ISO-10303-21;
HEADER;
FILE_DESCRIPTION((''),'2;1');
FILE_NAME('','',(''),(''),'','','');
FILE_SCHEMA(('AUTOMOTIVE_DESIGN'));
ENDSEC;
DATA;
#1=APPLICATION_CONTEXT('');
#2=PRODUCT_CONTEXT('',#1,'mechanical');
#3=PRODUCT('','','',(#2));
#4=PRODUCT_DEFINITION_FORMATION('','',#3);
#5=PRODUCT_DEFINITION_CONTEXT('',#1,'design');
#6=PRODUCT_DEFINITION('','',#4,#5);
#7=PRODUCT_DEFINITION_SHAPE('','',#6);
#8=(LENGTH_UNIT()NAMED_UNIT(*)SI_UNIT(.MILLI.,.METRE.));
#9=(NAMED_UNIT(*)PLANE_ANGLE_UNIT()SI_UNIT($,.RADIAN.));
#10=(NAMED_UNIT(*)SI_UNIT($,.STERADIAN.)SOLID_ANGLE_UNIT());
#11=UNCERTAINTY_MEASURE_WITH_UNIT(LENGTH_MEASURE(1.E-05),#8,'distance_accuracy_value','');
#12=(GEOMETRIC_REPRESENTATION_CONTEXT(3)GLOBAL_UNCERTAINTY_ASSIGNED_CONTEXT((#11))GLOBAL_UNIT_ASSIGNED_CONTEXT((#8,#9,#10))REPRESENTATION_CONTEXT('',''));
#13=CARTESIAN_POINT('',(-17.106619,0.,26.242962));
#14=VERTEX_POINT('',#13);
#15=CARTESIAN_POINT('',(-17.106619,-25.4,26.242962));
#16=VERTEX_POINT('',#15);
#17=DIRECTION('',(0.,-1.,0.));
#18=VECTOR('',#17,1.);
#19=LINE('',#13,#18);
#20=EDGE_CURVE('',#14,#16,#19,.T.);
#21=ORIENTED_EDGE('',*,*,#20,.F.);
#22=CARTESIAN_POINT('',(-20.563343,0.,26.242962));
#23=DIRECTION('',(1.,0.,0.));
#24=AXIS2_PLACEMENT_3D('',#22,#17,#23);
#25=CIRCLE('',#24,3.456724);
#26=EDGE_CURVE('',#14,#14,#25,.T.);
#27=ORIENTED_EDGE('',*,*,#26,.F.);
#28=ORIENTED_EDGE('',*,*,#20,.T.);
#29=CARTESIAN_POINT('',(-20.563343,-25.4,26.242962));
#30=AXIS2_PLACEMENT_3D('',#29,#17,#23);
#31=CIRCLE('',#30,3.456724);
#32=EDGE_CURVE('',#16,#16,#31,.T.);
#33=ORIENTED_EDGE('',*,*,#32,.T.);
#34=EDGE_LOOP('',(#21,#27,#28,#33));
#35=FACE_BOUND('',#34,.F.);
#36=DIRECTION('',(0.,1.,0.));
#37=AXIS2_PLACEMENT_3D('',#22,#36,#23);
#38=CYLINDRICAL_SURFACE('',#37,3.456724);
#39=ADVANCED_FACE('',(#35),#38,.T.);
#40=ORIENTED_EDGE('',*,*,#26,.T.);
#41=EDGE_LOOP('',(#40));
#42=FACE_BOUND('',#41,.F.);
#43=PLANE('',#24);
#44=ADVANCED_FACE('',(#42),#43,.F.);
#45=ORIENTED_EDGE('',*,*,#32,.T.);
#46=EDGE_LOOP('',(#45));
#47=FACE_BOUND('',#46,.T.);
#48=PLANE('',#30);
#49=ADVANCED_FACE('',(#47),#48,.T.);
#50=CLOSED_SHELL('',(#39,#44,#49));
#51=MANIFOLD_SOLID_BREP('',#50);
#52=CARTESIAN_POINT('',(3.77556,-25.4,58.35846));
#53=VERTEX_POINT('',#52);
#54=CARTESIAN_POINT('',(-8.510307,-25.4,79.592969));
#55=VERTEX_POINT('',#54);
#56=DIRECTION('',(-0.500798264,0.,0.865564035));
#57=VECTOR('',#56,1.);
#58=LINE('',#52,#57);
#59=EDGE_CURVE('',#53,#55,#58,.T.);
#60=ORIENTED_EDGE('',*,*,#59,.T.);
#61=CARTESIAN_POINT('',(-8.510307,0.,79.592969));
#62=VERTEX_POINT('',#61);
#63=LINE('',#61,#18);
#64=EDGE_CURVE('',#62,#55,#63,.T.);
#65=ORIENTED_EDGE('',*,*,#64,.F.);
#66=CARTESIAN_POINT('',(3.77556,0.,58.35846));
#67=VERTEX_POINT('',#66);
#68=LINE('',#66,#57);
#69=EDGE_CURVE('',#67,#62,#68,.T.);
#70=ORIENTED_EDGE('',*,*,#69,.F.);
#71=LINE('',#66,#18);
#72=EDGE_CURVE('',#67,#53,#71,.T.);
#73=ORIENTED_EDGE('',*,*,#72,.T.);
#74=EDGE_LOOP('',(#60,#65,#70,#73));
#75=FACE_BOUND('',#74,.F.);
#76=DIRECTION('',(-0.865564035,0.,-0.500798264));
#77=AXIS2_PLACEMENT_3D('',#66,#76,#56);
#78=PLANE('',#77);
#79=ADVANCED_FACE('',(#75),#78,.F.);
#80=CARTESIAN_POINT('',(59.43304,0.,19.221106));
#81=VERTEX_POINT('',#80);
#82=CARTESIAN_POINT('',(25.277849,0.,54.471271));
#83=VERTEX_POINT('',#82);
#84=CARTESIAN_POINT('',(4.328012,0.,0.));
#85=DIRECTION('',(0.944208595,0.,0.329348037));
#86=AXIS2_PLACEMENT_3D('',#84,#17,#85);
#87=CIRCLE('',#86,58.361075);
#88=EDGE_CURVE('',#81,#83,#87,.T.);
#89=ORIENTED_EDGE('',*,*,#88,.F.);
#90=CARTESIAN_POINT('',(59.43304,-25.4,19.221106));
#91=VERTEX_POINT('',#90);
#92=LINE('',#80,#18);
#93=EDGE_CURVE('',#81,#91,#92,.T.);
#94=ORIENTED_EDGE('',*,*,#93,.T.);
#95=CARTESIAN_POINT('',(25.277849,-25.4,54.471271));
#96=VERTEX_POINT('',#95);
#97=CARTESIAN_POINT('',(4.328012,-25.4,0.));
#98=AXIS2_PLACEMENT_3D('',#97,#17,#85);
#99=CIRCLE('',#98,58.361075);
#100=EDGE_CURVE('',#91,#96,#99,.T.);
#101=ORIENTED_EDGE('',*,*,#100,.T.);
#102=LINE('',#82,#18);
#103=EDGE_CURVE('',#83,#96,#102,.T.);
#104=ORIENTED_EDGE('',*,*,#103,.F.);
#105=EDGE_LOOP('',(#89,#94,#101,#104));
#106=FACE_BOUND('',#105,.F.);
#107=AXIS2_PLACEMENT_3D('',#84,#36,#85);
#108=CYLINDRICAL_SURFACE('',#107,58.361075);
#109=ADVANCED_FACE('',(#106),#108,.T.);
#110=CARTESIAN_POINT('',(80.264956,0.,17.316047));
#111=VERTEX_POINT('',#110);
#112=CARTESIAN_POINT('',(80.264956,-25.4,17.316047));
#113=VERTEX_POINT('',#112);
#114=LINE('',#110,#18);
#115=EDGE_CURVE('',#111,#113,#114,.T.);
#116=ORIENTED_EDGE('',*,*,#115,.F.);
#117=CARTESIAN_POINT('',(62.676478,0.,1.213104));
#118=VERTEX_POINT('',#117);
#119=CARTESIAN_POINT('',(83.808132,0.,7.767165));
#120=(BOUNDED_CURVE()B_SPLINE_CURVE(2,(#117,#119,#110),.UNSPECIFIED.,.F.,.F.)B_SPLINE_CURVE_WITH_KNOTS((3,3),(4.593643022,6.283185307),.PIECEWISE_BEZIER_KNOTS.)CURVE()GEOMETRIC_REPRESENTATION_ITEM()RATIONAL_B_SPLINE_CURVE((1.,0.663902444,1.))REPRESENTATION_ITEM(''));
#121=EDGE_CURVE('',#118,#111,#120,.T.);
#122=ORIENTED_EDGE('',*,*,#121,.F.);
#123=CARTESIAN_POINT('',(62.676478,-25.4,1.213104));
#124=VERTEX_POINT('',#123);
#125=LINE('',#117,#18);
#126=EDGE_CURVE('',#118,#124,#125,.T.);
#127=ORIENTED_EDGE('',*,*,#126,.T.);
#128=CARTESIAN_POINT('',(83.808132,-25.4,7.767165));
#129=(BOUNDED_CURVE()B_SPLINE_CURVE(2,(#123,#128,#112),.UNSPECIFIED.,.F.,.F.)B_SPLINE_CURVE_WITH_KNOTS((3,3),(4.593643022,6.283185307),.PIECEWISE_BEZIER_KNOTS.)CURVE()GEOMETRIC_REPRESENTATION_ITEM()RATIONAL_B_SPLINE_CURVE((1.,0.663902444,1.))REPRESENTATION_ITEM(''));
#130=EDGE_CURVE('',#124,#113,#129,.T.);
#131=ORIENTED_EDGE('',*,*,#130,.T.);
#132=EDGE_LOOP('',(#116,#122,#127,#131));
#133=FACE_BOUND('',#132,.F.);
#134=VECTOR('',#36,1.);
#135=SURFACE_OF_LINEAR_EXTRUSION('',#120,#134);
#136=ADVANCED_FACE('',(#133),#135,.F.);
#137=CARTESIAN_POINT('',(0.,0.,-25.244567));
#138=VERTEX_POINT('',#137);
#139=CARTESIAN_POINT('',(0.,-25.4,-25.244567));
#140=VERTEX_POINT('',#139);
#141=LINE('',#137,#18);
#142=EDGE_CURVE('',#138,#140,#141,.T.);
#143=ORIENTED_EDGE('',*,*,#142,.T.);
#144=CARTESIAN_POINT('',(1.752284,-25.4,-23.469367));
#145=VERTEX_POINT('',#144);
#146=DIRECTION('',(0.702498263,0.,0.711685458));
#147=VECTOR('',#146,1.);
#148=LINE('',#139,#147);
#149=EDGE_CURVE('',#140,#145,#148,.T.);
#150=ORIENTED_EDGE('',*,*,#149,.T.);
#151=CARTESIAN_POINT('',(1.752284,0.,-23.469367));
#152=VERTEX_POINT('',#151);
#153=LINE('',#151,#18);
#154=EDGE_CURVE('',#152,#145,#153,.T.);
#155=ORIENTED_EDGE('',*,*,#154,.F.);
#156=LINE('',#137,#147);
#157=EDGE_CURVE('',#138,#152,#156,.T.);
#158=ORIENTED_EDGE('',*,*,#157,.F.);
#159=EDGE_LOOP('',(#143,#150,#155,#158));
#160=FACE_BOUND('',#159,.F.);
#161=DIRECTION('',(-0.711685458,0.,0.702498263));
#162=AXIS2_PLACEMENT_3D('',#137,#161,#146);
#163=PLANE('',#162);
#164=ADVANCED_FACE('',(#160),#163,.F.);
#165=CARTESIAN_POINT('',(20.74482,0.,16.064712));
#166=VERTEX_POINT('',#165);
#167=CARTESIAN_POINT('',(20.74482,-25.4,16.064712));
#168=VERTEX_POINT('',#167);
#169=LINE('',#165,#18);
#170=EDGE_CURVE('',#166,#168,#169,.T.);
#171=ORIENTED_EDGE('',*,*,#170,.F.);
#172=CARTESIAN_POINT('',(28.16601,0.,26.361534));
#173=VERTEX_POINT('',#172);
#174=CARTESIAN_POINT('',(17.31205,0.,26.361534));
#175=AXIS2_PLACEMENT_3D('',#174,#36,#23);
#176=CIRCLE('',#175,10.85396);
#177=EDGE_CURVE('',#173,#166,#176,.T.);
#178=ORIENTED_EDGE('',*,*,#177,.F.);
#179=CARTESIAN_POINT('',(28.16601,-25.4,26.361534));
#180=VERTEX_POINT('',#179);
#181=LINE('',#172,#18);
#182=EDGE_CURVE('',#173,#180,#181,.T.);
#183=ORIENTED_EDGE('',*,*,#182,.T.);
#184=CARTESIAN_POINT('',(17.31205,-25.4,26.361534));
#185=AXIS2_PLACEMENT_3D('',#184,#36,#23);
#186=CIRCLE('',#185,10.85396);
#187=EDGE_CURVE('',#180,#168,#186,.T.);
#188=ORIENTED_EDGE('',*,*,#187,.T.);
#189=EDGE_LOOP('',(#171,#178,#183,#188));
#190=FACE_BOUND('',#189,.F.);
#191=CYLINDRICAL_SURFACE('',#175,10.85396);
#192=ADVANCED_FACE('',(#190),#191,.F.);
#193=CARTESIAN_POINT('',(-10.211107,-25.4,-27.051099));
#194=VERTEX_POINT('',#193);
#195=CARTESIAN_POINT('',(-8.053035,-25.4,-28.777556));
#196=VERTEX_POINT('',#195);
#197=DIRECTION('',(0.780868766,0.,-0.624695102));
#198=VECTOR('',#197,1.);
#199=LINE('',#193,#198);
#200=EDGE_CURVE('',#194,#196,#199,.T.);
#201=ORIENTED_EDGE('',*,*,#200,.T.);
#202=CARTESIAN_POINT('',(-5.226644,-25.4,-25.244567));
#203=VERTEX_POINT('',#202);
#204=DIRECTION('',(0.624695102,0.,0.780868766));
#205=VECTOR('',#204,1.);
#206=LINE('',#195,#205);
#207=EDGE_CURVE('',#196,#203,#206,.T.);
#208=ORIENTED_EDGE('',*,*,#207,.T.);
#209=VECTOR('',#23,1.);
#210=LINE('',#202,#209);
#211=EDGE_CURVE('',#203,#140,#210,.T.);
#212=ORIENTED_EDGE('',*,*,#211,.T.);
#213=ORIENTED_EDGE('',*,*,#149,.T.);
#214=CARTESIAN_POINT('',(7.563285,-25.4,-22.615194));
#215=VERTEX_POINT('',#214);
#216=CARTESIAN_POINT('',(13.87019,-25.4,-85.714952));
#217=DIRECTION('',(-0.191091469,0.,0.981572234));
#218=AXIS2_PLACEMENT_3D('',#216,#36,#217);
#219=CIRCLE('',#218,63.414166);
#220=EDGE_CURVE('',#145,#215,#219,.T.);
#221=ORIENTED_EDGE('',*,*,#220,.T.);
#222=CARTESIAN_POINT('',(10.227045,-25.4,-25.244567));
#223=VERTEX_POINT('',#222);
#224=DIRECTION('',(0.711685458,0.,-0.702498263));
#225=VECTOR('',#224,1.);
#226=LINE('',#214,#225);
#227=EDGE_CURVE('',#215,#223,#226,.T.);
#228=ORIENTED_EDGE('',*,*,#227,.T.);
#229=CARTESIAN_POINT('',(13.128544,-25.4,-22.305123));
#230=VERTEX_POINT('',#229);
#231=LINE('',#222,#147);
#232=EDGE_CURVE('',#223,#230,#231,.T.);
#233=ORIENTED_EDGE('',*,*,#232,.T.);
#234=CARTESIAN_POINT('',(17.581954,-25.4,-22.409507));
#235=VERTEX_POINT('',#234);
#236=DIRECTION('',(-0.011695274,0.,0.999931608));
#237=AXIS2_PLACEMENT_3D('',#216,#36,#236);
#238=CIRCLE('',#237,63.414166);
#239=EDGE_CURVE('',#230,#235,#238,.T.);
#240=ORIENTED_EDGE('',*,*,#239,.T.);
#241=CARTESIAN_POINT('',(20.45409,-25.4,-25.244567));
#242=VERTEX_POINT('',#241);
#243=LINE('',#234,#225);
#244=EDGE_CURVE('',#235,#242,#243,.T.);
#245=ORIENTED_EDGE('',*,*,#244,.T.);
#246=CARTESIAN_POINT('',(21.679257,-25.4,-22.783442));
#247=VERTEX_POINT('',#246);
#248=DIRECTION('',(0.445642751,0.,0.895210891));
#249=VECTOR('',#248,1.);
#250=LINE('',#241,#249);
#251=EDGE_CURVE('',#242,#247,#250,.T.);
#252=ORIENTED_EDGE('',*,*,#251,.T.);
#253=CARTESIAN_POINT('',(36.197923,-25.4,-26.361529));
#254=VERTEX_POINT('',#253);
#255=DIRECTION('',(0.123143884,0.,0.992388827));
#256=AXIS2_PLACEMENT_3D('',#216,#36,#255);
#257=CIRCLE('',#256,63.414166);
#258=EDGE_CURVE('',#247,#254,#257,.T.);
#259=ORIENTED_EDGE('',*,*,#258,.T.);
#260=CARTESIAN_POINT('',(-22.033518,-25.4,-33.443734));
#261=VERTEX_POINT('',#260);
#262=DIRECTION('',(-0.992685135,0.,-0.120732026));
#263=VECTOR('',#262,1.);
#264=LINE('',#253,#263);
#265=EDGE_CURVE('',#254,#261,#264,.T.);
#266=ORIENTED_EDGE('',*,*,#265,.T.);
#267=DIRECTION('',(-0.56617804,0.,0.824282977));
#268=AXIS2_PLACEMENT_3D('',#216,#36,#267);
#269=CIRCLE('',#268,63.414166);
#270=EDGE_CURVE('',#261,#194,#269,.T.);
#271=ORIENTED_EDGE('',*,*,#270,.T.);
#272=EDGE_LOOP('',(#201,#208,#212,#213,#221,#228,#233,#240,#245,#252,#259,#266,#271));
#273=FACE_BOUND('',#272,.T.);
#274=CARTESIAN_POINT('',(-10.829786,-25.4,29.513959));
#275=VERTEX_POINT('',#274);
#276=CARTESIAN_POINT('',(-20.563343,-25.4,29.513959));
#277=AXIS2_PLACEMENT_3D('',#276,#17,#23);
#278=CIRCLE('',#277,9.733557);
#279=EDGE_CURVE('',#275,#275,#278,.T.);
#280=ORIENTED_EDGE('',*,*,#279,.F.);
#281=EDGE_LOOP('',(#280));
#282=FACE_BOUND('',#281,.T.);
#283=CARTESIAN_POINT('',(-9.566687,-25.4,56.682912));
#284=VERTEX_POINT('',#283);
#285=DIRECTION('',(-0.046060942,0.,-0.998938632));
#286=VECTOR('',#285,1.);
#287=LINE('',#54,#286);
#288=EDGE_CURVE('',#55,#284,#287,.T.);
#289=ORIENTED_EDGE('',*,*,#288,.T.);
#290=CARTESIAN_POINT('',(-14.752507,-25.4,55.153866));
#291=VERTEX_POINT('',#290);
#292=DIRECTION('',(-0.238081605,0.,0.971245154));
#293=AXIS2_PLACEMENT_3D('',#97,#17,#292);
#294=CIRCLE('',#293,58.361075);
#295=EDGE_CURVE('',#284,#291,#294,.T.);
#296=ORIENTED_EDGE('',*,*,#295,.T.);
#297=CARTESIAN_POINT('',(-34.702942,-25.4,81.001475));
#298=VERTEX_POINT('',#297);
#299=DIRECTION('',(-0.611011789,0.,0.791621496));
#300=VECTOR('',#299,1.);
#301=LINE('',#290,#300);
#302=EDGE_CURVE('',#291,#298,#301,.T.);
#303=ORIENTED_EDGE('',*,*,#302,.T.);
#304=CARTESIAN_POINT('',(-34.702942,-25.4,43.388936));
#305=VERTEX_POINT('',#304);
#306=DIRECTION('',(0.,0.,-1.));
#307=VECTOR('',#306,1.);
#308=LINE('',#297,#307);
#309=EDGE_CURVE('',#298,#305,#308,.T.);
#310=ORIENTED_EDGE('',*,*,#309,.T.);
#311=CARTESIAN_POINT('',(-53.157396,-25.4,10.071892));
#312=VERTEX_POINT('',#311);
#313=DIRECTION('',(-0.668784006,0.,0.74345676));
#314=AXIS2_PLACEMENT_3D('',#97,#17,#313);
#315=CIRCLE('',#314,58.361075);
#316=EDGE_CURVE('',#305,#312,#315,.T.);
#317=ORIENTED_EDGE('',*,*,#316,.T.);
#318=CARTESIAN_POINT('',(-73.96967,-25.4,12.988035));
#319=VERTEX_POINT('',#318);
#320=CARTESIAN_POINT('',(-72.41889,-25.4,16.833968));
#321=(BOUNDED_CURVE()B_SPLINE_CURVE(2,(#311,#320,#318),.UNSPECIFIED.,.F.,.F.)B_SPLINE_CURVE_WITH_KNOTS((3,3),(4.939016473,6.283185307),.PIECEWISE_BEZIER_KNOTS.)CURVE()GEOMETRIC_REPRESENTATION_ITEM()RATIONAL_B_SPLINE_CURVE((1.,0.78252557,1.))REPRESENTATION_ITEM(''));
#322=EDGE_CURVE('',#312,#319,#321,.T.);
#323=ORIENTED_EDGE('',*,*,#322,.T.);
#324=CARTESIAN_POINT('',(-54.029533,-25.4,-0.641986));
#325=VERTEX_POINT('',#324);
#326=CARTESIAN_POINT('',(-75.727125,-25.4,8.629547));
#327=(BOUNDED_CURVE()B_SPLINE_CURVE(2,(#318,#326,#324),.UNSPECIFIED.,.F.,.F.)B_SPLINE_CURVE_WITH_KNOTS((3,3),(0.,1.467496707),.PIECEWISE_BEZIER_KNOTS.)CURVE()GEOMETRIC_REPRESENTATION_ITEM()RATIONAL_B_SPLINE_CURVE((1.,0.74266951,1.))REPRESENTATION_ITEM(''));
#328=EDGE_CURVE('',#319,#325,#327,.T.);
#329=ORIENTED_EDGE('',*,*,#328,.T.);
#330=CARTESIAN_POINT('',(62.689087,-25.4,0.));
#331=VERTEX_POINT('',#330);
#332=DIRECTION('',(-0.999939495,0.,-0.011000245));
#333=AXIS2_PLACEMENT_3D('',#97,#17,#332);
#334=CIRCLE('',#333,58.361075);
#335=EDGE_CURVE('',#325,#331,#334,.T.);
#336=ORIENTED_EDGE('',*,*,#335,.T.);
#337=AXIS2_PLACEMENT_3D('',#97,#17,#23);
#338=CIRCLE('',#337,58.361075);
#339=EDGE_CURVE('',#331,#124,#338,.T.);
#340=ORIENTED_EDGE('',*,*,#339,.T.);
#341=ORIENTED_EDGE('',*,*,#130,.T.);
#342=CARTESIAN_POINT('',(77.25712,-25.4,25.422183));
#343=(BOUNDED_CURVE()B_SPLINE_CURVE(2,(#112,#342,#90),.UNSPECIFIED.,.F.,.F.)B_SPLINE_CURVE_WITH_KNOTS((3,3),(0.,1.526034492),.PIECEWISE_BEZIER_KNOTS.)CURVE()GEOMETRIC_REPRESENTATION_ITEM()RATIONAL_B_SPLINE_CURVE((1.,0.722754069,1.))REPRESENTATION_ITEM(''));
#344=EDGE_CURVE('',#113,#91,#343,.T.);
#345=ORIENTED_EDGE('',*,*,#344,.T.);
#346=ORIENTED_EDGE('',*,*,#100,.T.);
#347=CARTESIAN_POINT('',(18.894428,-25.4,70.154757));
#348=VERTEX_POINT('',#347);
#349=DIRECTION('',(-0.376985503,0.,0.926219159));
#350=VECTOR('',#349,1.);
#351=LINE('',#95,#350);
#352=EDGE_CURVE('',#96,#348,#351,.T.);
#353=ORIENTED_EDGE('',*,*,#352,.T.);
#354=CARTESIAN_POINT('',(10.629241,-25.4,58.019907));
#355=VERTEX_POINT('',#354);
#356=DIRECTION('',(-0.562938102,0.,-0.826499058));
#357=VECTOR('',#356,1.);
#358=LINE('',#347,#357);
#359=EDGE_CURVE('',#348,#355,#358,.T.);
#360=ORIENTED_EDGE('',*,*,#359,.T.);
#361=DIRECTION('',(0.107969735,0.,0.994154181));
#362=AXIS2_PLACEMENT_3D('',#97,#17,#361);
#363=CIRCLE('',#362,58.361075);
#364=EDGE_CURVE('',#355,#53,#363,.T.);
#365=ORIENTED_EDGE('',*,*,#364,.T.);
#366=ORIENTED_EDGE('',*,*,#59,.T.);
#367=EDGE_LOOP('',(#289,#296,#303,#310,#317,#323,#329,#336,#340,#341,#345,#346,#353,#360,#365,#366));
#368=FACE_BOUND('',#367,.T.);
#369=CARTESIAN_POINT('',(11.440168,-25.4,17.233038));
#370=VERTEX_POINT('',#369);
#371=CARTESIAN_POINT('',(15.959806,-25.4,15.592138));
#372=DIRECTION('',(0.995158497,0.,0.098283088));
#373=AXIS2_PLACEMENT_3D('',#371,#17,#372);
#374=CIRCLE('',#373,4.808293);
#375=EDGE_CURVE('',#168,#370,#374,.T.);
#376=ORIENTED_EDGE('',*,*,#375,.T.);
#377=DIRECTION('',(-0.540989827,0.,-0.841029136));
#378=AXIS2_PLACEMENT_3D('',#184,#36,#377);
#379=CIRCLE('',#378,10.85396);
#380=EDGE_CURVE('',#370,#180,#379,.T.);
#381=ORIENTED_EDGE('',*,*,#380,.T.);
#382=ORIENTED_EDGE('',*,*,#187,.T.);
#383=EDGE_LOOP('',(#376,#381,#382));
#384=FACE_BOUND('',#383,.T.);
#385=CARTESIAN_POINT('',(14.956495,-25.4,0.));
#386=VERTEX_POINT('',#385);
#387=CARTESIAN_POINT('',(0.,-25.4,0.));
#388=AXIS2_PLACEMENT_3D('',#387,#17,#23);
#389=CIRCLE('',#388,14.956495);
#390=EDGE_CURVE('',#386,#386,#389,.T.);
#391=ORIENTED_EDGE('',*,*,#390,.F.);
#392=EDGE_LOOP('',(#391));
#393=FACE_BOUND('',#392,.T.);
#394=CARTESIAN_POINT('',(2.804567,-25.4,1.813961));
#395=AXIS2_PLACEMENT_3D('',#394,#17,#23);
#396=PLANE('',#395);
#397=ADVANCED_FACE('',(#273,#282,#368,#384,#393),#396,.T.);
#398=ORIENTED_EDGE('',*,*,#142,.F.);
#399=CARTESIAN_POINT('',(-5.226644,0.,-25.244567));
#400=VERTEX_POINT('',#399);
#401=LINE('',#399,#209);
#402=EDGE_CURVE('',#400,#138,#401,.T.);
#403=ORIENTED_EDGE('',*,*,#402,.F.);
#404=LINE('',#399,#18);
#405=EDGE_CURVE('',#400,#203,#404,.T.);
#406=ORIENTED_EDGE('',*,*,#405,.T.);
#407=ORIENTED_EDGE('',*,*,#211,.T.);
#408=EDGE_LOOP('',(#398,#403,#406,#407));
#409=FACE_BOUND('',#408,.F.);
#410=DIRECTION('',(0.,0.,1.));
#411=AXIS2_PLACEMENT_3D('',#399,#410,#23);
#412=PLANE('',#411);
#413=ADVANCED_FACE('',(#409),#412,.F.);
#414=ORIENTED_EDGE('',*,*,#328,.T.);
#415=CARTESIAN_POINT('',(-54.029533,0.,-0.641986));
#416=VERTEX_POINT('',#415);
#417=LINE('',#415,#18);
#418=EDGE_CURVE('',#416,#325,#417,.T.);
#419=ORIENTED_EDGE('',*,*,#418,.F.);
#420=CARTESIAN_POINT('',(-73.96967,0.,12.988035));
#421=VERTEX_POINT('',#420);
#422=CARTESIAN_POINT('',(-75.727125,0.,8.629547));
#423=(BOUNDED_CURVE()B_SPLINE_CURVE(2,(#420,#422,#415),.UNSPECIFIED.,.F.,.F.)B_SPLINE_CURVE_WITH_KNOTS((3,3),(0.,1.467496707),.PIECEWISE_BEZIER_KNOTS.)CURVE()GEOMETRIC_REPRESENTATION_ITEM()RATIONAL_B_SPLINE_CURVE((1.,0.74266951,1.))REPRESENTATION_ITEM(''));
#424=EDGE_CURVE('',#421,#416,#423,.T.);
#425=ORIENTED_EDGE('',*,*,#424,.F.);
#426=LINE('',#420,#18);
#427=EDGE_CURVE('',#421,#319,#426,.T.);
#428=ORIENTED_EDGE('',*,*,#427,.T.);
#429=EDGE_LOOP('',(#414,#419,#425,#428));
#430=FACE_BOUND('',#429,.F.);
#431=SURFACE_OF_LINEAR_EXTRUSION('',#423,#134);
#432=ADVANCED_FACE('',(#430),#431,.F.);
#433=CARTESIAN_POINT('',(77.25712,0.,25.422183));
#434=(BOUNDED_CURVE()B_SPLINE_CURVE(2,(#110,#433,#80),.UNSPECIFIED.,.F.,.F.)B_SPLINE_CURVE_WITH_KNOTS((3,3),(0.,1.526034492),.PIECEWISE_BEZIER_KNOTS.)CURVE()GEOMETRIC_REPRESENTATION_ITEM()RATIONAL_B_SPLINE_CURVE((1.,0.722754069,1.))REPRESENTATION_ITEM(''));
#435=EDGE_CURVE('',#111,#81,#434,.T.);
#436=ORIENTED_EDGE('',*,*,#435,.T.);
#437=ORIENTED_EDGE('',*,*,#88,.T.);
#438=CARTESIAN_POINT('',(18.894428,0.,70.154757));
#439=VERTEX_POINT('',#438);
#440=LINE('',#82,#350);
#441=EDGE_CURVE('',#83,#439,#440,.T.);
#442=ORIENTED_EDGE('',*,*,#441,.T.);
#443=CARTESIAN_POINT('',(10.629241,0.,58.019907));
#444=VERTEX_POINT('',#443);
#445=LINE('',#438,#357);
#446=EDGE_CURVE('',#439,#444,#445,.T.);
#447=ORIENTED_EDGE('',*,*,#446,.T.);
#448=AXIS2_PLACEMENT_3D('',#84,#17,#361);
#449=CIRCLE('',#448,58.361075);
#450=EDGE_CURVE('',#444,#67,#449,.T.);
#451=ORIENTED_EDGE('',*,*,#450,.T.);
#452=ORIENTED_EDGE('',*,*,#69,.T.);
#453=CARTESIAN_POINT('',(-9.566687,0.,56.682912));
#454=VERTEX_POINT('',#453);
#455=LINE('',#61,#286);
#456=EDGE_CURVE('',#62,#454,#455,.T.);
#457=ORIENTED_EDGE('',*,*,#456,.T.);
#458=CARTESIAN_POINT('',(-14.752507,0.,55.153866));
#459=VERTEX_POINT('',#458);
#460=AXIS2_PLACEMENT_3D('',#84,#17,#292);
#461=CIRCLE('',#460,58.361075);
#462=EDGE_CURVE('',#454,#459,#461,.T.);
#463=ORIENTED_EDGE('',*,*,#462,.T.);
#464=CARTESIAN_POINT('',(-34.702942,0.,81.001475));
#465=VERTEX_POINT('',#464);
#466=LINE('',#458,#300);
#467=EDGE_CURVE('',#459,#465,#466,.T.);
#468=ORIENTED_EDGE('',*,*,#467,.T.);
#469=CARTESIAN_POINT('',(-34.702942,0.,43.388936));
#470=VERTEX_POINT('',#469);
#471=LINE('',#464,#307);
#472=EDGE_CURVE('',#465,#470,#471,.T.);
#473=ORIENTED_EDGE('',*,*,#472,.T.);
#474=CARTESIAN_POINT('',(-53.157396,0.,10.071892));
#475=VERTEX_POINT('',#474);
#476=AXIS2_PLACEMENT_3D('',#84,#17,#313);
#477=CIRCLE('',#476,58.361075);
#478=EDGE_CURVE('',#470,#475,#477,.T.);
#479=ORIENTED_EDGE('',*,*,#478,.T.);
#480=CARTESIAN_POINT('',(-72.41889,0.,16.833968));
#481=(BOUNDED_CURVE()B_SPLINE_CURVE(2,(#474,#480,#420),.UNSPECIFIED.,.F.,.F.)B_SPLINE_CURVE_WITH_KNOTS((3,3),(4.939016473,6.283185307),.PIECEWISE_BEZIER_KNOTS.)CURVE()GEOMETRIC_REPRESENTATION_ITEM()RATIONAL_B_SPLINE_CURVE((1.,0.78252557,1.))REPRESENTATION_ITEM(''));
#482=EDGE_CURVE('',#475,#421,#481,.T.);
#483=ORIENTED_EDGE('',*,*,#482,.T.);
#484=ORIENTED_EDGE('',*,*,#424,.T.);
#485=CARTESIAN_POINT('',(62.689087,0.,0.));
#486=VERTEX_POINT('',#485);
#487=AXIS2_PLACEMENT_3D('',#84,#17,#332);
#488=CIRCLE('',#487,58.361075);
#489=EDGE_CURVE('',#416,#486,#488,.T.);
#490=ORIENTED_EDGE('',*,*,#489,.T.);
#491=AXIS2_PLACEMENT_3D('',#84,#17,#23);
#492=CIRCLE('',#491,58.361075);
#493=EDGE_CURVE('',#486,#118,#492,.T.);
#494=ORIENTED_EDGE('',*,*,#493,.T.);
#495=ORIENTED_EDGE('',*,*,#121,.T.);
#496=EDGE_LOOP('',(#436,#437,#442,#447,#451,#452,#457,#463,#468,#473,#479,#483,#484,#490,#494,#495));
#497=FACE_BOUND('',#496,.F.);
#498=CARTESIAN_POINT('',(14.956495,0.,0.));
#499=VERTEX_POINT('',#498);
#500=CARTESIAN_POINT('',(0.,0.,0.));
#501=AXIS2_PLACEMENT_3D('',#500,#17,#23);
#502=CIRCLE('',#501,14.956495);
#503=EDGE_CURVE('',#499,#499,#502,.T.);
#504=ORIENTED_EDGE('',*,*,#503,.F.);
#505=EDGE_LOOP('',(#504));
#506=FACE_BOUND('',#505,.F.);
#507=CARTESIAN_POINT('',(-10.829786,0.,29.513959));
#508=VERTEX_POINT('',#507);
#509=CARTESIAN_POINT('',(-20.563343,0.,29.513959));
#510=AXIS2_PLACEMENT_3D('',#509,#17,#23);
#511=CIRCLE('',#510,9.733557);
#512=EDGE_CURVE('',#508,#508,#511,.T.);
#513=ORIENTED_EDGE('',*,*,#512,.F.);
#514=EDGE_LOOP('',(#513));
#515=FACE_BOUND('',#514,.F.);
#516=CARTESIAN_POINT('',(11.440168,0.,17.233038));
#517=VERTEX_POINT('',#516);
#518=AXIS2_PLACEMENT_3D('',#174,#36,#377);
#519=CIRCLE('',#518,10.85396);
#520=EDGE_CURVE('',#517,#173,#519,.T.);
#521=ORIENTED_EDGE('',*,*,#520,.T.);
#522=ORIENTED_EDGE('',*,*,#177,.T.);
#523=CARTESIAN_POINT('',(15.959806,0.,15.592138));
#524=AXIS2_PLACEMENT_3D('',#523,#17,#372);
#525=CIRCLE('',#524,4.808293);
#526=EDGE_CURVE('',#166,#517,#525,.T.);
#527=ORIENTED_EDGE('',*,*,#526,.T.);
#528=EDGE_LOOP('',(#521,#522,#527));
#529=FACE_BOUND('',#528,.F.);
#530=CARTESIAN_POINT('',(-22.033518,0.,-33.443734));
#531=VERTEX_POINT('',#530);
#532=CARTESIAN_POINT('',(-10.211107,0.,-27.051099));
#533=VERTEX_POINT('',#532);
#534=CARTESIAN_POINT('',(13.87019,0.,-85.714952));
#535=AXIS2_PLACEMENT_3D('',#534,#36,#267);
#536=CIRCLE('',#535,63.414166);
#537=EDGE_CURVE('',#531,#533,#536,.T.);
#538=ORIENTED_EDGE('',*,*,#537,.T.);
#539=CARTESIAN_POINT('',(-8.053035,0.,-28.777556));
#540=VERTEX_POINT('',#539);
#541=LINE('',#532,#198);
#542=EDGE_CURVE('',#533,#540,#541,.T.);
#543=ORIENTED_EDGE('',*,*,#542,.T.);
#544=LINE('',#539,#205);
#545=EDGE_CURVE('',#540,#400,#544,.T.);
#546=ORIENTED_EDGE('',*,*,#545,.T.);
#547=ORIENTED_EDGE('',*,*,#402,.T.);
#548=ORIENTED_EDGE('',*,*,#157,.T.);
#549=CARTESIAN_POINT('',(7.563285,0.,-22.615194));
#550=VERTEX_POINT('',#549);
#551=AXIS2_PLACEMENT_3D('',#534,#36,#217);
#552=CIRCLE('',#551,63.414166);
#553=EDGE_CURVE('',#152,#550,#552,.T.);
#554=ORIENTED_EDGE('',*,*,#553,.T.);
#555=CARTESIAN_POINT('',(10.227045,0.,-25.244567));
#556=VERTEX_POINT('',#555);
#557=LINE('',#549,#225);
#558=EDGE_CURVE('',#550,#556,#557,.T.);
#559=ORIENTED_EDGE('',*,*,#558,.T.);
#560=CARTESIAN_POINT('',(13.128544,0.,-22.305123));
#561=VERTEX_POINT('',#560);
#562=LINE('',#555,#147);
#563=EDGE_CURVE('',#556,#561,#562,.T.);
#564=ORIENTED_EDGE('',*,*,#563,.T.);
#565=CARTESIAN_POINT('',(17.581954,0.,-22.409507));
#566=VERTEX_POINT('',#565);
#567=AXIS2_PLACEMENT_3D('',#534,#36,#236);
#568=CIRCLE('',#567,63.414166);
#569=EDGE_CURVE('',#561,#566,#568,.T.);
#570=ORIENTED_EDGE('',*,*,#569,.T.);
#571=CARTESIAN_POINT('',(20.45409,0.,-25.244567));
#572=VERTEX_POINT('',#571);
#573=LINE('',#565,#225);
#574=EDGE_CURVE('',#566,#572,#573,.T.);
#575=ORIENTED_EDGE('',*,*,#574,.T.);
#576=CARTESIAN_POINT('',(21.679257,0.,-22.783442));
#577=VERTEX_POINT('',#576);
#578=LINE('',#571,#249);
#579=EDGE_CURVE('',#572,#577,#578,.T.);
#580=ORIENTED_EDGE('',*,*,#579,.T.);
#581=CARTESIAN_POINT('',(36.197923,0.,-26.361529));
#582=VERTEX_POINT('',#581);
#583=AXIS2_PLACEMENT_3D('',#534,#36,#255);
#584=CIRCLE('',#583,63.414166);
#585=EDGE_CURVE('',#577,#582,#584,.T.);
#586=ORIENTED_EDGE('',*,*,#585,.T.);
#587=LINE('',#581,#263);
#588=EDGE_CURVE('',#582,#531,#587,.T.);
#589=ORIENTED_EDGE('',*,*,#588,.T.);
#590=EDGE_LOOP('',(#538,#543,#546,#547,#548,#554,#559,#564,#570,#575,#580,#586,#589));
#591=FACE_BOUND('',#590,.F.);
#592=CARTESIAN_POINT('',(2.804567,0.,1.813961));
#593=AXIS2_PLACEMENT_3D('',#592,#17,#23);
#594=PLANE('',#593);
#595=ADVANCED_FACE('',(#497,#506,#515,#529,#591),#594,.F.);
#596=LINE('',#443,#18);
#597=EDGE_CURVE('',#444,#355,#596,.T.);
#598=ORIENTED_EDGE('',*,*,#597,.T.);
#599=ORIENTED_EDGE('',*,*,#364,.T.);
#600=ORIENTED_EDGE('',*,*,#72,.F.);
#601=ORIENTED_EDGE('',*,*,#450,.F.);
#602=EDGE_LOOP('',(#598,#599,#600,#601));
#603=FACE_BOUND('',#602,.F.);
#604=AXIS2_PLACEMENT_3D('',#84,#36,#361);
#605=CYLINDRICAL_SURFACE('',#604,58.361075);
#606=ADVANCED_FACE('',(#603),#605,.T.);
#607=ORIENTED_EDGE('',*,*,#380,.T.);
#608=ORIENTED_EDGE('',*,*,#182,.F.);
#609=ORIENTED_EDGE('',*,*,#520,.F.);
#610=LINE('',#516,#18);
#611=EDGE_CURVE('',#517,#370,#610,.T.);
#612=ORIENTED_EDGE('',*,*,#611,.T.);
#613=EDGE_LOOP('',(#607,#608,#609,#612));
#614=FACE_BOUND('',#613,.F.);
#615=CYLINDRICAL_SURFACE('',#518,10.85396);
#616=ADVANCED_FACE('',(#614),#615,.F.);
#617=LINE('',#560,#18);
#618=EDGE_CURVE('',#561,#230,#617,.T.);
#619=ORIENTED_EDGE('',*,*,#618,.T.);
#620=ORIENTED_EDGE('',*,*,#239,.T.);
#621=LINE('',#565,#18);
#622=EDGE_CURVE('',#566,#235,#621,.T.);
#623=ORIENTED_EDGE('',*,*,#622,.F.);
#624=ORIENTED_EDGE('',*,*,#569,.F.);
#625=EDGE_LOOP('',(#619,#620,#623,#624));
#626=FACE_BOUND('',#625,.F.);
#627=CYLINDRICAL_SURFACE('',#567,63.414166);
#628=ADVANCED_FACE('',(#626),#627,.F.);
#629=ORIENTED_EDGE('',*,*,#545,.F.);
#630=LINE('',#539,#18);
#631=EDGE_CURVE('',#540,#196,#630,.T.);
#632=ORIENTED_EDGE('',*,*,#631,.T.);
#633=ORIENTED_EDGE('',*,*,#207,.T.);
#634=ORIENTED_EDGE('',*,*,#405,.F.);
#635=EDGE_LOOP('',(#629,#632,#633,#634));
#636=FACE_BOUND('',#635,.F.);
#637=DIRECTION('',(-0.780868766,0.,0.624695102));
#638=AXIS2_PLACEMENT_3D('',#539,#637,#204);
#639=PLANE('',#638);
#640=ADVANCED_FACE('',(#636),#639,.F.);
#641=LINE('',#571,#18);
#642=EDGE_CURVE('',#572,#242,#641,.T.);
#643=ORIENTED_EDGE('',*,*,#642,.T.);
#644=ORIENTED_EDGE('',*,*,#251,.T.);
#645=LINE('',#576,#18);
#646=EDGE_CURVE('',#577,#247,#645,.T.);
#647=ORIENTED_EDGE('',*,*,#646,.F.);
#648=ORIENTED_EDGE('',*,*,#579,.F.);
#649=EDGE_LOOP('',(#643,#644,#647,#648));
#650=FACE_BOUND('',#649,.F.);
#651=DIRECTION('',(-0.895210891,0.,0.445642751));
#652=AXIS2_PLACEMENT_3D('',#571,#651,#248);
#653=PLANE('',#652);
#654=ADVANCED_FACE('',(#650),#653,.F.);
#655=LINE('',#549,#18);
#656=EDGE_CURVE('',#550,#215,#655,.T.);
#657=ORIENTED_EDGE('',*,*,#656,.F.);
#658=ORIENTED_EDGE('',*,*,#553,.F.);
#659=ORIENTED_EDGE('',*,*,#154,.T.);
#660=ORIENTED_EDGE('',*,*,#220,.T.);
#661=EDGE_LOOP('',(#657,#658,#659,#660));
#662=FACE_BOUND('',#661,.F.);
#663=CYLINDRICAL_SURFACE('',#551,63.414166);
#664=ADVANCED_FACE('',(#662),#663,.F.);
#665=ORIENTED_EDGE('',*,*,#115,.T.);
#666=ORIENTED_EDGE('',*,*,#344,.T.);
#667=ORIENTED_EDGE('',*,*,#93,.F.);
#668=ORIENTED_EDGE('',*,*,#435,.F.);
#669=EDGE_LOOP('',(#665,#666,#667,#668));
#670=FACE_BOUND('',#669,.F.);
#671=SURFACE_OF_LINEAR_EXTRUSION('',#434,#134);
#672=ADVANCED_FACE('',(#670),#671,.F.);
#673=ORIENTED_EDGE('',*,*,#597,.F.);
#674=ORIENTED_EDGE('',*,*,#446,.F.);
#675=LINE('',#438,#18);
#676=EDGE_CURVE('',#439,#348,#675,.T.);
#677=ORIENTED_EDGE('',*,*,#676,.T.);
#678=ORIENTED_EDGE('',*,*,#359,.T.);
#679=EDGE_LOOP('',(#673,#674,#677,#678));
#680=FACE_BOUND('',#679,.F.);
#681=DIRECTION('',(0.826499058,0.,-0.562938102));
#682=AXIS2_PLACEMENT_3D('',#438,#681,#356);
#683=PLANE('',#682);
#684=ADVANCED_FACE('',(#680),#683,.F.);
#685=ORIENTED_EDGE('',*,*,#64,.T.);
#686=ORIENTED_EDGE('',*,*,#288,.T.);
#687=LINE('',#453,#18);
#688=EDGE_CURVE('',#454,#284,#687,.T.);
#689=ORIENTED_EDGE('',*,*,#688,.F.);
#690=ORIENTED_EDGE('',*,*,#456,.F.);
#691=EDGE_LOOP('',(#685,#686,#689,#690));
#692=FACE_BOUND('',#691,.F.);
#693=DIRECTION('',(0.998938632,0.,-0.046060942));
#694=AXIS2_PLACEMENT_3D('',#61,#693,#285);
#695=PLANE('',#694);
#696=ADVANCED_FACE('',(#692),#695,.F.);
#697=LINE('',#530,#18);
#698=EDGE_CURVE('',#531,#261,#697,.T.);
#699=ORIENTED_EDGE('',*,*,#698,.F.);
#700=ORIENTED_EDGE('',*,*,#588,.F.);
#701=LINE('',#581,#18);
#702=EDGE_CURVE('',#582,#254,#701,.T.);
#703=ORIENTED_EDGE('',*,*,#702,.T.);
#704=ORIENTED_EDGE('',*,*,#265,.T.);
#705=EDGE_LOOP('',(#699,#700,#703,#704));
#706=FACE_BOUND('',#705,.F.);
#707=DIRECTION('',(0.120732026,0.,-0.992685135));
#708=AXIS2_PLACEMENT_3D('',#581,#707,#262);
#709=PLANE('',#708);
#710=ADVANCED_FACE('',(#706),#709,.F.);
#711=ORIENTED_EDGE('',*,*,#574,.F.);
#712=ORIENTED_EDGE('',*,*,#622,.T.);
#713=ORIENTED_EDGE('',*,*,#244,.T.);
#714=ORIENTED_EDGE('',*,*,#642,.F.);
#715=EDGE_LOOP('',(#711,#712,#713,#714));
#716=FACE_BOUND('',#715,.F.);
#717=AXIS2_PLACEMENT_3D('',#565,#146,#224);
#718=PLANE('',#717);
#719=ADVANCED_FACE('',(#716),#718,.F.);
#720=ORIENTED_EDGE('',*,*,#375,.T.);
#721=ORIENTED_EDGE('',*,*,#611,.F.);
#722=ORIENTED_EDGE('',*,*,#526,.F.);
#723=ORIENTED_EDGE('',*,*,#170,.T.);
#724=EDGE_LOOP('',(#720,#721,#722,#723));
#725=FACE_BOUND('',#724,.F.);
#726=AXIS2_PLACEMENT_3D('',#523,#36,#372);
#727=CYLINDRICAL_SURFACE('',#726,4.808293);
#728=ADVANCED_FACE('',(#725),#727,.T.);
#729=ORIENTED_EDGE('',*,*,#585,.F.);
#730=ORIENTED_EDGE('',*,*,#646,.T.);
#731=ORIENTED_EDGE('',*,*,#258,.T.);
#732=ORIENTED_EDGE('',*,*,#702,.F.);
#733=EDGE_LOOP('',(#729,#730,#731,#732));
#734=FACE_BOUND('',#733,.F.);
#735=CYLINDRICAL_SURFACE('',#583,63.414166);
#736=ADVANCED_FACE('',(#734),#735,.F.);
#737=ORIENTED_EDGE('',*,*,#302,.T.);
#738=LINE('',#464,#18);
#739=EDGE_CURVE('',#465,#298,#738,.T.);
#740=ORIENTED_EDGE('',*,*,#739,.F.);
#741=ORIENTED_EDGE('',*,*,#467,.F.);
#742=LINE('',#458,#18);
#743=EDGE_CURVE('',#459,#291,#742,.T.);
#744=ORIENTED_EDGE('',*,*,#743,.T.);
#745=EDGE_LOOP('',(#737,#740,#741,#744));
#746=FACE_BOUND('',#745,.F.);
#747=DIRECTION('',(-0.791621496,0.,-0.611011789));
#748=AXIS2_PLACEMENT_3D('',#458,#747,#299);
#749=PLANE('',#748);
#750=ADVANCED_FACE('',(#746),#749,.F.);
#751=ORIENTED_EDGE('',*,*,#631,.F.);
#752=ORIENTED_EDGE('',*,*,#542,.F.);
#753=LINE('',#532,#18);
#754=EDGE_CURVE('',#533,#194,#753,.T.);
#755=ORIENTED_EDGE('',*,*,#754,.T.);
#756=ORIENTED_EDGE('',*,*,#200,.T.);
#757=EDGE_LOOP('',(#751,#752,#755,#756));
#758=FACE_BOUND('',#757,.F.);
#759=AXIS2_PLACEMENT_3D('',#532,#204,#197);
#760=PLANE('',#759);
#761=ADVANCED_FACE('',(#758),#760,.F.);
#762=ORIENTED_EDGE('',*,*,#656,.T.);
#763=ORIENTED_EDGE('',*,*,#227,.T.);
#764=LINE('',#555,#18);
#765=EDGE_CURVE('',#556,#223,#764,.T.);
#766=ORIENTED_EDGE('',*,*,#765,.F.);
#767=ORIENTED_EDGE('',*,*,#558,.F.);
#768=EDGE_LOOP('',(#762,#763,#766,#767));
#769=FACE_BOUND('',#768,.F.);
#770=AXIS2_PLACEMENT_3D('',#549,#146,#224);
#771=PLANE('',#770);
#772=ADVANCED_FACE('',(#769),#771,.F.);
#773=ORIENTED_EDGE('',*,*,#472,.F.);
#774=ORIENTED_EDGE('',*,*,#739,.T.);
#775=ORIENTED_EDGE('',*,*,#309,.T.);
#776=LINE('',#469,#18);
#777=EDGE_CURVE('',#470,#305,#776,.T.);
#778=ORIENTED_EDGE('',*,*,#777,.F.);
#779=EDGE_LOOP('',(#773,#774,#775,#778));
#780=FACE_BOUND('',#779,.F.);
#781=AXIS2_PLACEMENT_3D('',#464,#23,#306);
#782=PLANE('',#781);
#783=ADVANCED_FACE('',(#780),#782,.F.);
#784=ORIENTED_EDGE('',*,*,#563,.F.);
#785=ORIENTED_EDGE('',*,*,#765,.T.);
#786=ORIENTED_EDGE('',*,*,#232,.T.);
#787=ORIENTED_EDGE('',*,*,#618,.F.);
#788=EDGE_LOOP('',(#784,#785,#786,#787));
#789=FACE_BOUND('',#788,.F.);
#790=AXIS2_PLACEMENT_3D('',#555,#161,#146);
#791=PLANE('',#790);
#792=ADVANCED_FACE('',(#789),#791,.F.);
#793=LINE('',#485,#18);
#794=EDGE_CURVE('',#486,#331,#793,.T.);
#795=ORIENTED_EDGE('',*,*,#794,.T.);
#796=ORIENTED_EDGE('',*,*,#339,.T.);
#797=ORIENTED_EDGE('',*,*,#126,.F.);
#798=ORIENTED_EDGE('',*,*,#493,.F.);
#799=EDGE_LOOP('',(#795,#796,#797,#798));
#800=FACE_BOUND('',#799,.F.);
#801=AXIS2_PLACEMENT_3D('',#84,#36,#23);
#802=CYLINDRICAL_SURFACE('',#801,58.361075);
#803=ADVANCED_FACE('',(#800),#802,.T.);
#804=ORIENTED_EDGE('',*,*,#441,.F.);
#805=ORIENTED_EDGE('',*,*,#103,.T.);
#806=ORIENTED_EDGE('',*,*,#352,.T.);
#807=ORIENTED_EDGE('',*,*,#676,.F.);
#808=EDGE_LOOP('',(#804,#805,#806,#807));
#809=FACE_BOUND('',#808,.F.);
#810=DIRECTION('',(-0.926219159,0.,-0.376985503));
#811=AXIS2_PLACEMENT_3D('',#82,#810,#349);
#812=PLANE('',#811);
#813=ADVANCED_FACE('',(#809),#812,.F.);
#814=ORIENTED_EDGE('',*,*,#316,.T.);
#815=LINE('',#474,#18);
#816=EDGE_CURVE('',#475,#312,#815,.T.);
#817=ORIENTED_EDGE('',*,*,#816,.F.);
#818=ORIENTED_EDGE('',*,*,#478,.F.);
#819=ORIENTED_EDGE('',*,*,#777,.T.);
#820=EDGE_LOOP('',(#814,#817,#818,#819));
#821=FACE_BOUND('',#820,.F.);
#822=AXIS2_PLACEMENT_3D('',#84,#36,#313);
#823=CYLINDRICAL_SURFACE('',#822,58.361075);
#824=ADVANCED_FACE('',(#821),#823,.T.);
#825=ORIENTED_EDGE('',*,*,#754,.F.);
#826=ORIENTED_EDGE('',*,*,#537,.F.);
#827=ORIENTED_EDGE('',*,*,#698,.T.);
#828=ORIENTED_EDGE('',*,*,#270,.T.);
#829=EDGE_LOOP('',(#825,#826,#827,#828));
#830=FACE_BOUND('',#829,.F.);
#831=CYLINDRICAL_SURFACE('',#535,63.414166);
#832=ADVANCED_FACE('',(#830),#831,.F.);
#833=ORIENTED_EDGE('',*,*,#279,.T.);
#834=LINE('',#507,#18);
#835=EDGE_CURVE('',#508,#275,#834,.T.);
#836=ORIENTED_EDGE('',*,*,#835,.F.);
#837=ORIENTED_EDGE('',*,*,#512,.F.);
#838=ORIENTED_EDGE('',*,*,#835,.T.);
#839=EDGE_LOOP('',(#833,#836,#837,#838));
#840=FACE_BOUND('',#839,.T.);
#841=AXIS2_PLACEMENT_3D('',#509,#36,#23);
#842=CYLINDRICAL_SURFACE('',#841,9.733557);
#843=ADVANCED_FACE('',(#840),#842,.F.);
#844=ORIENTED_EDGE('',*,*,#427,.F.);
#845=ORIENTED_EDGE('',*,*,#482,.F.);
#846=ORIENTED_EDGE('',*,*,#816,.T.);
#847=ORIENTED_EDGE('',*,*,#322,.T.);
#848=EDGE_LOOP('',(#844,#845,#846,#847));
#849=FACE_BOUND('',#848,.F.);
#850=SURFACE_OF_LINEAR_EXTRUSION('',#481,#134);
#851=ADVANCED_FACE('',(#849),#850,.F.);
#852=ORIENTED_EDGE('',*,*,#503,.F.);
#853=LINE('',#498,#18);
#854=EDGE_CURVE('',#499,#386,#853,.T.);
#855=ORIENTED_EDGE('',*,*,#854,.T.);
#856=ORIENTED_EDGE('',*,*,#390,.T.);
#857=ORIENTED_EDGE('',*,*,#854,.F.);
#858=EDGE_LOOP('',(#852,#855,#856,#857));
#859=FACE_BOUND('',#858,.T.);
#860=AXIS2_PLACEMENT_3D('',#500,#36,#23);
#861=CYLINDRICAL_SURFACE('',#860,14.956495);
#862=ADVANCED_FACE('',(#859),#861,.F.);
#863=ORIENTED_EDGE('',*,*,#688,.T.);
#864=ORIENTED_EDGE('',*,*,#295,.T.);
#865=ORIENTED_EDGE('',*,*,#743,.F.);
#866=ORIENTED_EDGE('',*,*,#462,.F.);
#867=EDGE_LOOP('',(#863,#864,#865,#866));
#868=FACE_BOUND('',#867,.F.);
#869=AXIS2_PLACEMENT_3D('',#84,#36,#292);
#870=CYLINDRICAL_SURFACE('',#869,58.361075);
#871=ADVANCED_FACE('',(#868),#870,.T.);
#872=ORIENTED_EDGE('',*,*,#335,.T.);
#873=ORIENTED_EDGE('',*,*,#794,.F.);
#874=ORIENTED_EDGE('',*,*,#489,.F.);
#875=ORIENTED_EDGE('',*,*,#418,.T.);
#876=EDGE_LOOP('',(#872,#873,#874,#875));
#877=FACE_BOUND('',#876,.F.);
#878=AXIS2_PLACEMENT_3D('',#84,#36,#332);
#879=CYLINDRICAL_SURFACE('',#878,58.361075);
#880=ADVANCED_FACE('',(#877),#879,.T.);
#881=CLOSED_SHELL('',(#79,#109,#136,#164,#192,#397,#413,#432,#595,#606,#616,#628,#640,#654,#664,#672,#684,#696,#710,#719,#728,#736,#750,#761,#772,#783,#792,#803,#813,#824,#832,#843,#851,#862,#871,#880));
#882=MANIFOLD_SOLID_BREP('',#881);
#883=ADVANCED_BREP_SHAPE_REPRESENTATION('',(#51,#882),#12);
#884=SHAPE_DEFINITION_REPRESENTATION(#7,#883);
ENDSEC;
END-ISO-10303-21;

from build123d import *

# Parameters (mm, degrees)
F0_R     = 14.9564951484
F0_R_2   = 9.7335574138
F1_DEPTH = 25.4
F0_R_3   = 3.456724349


# Not quite as in the source:
# - a feature names something its author has since deleted; it is built from what else it names
# - the program builds the solid bodies; features that only make, move or delete a surface that nothing else refers to are left out


with BuildPart() as f1:
    # F0 (on Front) → F1 (new body)
    with BuildSketch(Plane.XZ):
        with BuildLine():
            Line((29.2069212967, 44.8178982187), (-33.0534157144, 44.8178982187))
            ThreePointArc((-33.0534157144, 44.8178982187), (-33.8848589906, 44.1111281894), (-34.7029421619, 43.3889358876))
            ThreePointArc((-34.7029421619, 43.3889358876), (-46.7244943553, 28.2782026704), (-53.157396148, 10.0718919506))
            add(Edge.make_bspline(
                [(-54.0295326022, -0.6419861495), (-25.6291677814, -12.7776607333), (-25.1074200255, -6.368179936), (-24.5856722696, 0.0413008612), (-53.157396148, 10.0718919506)],
                knots=[1.4674967071, 1.4674967071, 1.4674967071, 3.2032565901, 3.2032565901, 4.9390164731, 4.9390164731, 4.9390164731], degree=2, weights=[1, 0.646445519, 1, 0.646445519, 1]))
            ThreePointArc((-54.0295326022, -0.6419861495), (4.6490094653, -58.3601924627), (62.6890867818, 0))
            ThreePointArc((62.6890867818, 0), (62.6859343797, 0.6065848839), (62.6764775138, 1.2131042379))
            add(Edge.make_bspline(
                [(59.4330403873, 19.2211055653), (41.4698148053, 12.9716188145), (43.0336953944, 4.2887424007), (44.5975759835, -4.3941340131), (62.6764775138, 1.2131042379)],
                knots=[1.5260344916, 1.5260344916, 1.5260344916, 3.0598387567, 3.0598387567, 4.5936430218, 4.5936430218, 4.5936430218], degree=2, weights=[1, 0.720063756, 1, 0.720063756, 1]))
            ThreePointArc((59.4330403873, 19.2211055653), (46.2413654037, 40.611400757), (25.2778493531, 54.4712713212))
            Line((25.2778493531, 54.4712713212), (29.2069212967, 44.8178982187))
        make_face()
        Circle(F0_R, mode=Mode.SUBTRACT)
        with BuildLine():
            ThreePointArc((21.6792569731, -22.7834417511), (29.0444233173, -24.1430496826), (36.1979231238, -26.361528784))
            Line((36.1979231238, -26.361528784), (-22.0335181803, -33.4437340498))
            ThreePointArc((-22.0335181803, -33.4437340498), (-16.2921483285, -29.9333256583), (-10.2111068854, -27.0510991203))
            Line((-10.2111068854, -27.0510991204), (-14.6030960605, -23.5375072807))
            Line((-14.6030960605, -23.5375072807), (5.047085695, -20.1314762235))
            Line((5.047085695, -20.1314762235), (24.1732671857, -17.7734531462))
            Line((24.1732671857, -17.7734531462), (21.6792569731, -22.7834417511))
        make_face(mode=Mode.SUBTRACT)
        with Locations((-20.5633433886, 29.5139586047)):
            Circle(F0_R_2, mode=Mode.SUBTRACT)
        with BuildLine():
            ThreePointArc((11.440167814, 17.2330375959), (12.1122768861, 35.8889061597), (28.1660100748, 26.361534372))
            ThreePointArc((28.1660100748, 26.361534372), (26.117377722, 20.0153029261), (20.7448195069, 16.0647122986))
            ThreePointArc((20.7448195069, 16.0647122986), (20.7622755027, 15.8287118822), (20.7680988698, 15.5921384334))
            ThreePointArc((20.7680988698, 15.5921384334), (15.1267587025, 10.8565590643), (11.440167814, 17.2330375959))
        make_face(mode=Mode.SUBTRACT)
        with BuildLine():
            ThreePointArc((-14.7525066988, 55.1538659378), (-24.3720908883, 50.8165251157), (-33.0534157144, 44.8178982187))
            Line((-33.0534157144, 44.8178982187), (29.2069212967, 44.8178982187))
            Line((29.2069212967, 44.8178982187), (25.2778493531, 54.4712713212))
            ThreePointArc((25.2778493531, 54.4712713212), (18.0685855983, 56.7204701), (10.6292413524, 58.0199069867))
            Line((10.6292413524, 58.0199069867), (7.0293885895, 52.7346457751))
            Line((7.0293885895, 52.7346457751), (3.7755604577, 58.3584604129))
            ThreePointArc((3.7755604577, 58.3584604129), (-2.9439825789, 57.9062449617), (-9.5666869161, 56.6829115246))
            Line((-9.5666869161, 56.6829115246), (-9.9255512055, 48.9001048884))
            Line((-9.9255512055, 48.9001048884), (-14.7525066988, 55.1538659378))
        make_face()
        with BuildLine():
            ThreePointArc((-34.7029421619, 43.3889358876), (-33.8848589906, 44.1111281894), (-33.0534157144, 44.8178982187))
            ThreePointArc((-33.0534157144, 44.8178982187), (-24.3720908883, 50.8165251157), (-14.7525066988, 55.1538659378))
            Line((-14.7525066988, 55.1538659378), (-34.7029421619, 81.0014745162))
            Line((-34.7029421619, 81.0014745162), (-34.7029421619, 43.3889358876))
        make_face()
        with BuildLine():
            add(Edge.make_bspline(
                [(80.264955759, 17.3160471022), (77.2571204557, 25.4221829679), (59.4330403873, 19.2211055653)],
                knots=[0, 0, 0, 1.5260344916, 1.5260344916, 1.5260344916], degree=2, weights=[1, 0.7227540692, 1]))
            ThreePointArc((59.4330403873, 19.2211055653), (61.7648977694, 10.3450086355), (62.6764775138, 1.2131042379))
            add(Edge.make_bspline(
                [(62.6764775138, 1.2131042379), (83.8081315933, 7.7671649955), (80.264955759, 17.3160471022)],
                knots=[4.5936430218, 4.5936430218, 4.5936430218, 6.2831853072, 6.2831853072, 6.2831853072], degree=2, weights=[1, 0.6639024438, 1]))
        make_face()
        with BuildLine():
            ThreePointArc((62.6764775138, 1.2131042379), (61.7648977694, 10.3450086355), (59.4330403873, 19.2211055653))
            add(Edge.make_bspline(
                [(59.4330403873, 19.2211055653), (41.4698148053, 12.9716188145), (43.0336953944, 4.2887424007), (44.5975759835, -4.3941340131), (62.6764775138, 1.2131042379)],
                knots=[1.5260344916, 1.5260344916, 1.5260344916, 3.0598387567, 3.0598387567, 4.5936430218, 4.5936430218, 4.5936430218], degree=2, weights=[1, 0.720063756, 1, 0.720063756, 1]))
        make_face()
        with BuildLine():
            add(Edge.make_bspline(
                [(-54.0295326022, -0.6419861495), (-25.6291677814, -12.7776607333), (-25.1074200255, -6.368179936), (-24.5856722696, 0.0413008612), (-53.157396148, 10.0718919506)],
                knots=[1.4674967071, 1.4674967071, 1.4674967071, 3.2032565901, 3.2032565901, 4.9390164731, 4.9390164731, 4.9390164731], degree=2, weights=[1, 0.646445519, 1, 0.646445519, 1]))
            ThreePointArc((-53.157396148, 10.0718919506), (-53.840658448, 4.7350751159), (-54.0295326022, -0.6419861495))
        make_face()
        with BuildLine():
            ThreePointArc((-54.0295326022, -0.6419861495), (-53.840658448, 4.7350751159), (-53.157396148, 10.0718919506))
            add(Edge.make_bspline(
                [(-53.157396148, 10.0718919506), (-72.4188899566, 16.8339679453), (-73.9696696401, 12.9880346358)],
                knots=[4.9390164731, 4.9390164731, 4.9390164731, 6.2831853072, 6.2831853072, 6.2831853072], degree=2, weights=[1, 0.7825255703, 1]))
            add(Edge.make_bspline(
                [(-73.9696696401, 12.9880346358), (-75.7271245891, 8.6295467082), (-54.0295326022, -0.6419861495)],
                knots=[0, 0, 0, 1.4674967071, 1.4674967071, 1.4674967071], degree=2, weights=[1, 0.7426695101, 1]))
        make_face()
        with BuildLine():
            Line((-8.5103068977, 79.5929687748), (-9.5666869161, 56.6829115246))
            ThreePointArc((-9.5666869161, 56.6829115246), (-2.9439825789, 57.9062449617), (3.7755604577, 58.3584604129))
            Line((3.7755604577, 58.3584604129), (-8.5103068977, 79.5929687748))
        make_face()
        with BuildLine():
            ThreePointArc((10.6292413524, 58.0199069867), (18.0685855983, 56.7204701), (25.2778493531, 54.4712713212))
            Line((25.2778493531, 54.4712713212), (18.8944284965, 70.1547569089))
            Line((18.8944284965, 70.1547569089), (10.6292413524, 58.0199069867))
        make_face()
        with BuildLine():
            ThreePointArc((17.581953772, -22.4095073895), (19.6336387932, -22.5632365329), (21.6792569731, -22.7834417511))
            Line((21.6792569731, -22.7834417511), (24.1732671857, -17.7734531462))
            Line((24.1732671857, -17.7734531462), (5.047085695, -20.1314762235))
            Line((5.047085695, -20.1314762235), (7.5632852876, -22.6151940263))
            ThreePointArc((7.5632852876, -22.6151940263), (10.3425062964, -22.398982827), (13.1285441555, -22.3051225785))
            Line((13.1285441555, -22.3051225785), (15.2741307635, -20.1314762235))
            Line((15.2741307635, -20.1314762235), (17.581953772, -22.4095073895))
        make_face()
        with BuildLine():
            Line((-14.6030960605, -23.5375072807), (-10.2111068854, -27.0510991204))
            ThreePointArc((-10.2111068854, -27.0510991203), (-7.7377628762, -26.0957196312), (-5.2266436009, -25.2445671531))
            ThreePointArc((-5.2266436009, -25.2445671531), (-1.7623985905, -24.2578232608), (1.7522839969, -23.4693669777))
            Line((1.7522839969, -23.4693669777), (5.047085695, -20.1314762235))
            Line((5.047085695, -20.1314762235), (-14.6030960605, -23.5375072807))
        make_face()
        with BuildLine():
            ThreePointArc((20.7448195069, 16.0647122986), (15.9598060497, 15.5921384334), (11.440167814, 17.2330375959))
            ThreePointArc((11.440167814, 17.2330375959), (15.1267587025, 10.8565590643), (20.7680988698, 15.5921384334))
            ThreePointArc((20.7680988698, 15.5921384334), (20.7622755027, 15.8287118822), (20.7448195069, 16.0647122986))
        make_face()
        with BuildLine():
            ThreePointArc((20.7448195069, 16.0647122986), (16.5588486209, 20.3629693716), (11.440167814, 17.2330375959))
            ThreePointArc((11.440167814, 17.2330375959), (15.9598060497, 15.5921384334), (20.7448195069, 16.0647122986))
        make_face()
        with BuildLine():
            ThreePointArc((-9.5666869161, 56.6829115246), (-12.1773125744, 55.9784724693), (-14.7525066988, 55.1538659378))
            Line((-14.7525066988, 55.1538659378), (-9.9255512055, 48.9001048884))
            Line((-9.9255512055, 48.9001048884), (-9.5666869161, 56.6829115246))
        make_face()
        with BuildLine():
            ThreePointArc((10.6292413524, 58.0199069867), (7.2073810591, 58.2900020166), (3.7755604577, 58.3584604129))
            Line((3.7755604577, 58.3584604129), (7.0293885895, 52.7346457751))
            Line((7.0293885895, 52.7346457751), (10.6292413524, 58.0199069867))
        make_face()
        with BuildLine():
            Line((7.5632852876, -22.6151940263), (5.047085695, -20.1314762235))
            Line((5.047085695, -20.1314762235), (1.7522839969, -23.4693669777))
            ThreePointArc((1.7522839969, -23.4693669777), (4.6478901063, -22.9749672477), (7.5632852876, -22.6151940263))
        make_face()
        with BuildLine():
            Line((10.2270450686, -25.2445671531), (13.1285441555, -22.3051225785))
            ThreePointArc((13.1285441555, -22.3051225785), (10.3425062964, -22.398982827), (7.5632852876, -22.6151940263))
            Line((7.5632852876, -22.6151940263), (10.2270450686, -25.2445671531))
        make_face()
        with BuildLine():
            ThreePointArc((-5.2266436009, -25.2445671531), (-7.7377628762, -26.0957196312), (-10.2111068854, -27.0510991203))
            Line((-10.2111068854, -27.0510991204), (-8.0530354753, -28.7775564939))
            Line((-8.0530354753, -28.7775564939), (-5.2266436009, -25.2445671531))
        make_face()
        with BuildLine():
            Line((20.4540901372, -25.2445671531), (21.6792569731, -22.7834417511))
            ThreePointArc((21.6792569731, -22.7834417511), (19.6336387932, -22.5632365329), (17.581953772, -22.4095073895))
            Line((17.581953772, -22.4095073895), (20.4540901372, -25.2445671531))
        make_face()
        with BuildLine():
            ThreePointArc((1.7522839969, -23.4693669777), (-1.7623985905, -24.2578232608), (-5.2266436009, -25.2445671531))
            Line((-5.2266436009, -25.2445671531), (0, -25.2445671531))
            Line((0, -25.2445671531), (1.7522839969, -23.4693669777))
        make_face()
        with BuildLine():
            ThreePointArc((13.1285441555, -22.3051225785), (15.356165832, -22.3181982774), (17.581953772, -22.4095073895))
            Line((17.581953772, -22.4095073895), (15.2741307635, -20.1314762235))
            Line((15.2741307635, -20.1314762235), (13.1285441555, -22.3051225785))
        make_face()
    extrude(amount=F1_DEPTH)


with BuildPart() as f1b:
    # F0 (on Front) → F1, piece 2 (new body)
    with BuildSketch(Plane.XZ):
        with Locations((-20.5633433886, 26.2429621071)):
            Circle(F0_R_3)
    extrude(amount=F1_DEPTH)


solid = Compound([f1.part, f1b.part])
